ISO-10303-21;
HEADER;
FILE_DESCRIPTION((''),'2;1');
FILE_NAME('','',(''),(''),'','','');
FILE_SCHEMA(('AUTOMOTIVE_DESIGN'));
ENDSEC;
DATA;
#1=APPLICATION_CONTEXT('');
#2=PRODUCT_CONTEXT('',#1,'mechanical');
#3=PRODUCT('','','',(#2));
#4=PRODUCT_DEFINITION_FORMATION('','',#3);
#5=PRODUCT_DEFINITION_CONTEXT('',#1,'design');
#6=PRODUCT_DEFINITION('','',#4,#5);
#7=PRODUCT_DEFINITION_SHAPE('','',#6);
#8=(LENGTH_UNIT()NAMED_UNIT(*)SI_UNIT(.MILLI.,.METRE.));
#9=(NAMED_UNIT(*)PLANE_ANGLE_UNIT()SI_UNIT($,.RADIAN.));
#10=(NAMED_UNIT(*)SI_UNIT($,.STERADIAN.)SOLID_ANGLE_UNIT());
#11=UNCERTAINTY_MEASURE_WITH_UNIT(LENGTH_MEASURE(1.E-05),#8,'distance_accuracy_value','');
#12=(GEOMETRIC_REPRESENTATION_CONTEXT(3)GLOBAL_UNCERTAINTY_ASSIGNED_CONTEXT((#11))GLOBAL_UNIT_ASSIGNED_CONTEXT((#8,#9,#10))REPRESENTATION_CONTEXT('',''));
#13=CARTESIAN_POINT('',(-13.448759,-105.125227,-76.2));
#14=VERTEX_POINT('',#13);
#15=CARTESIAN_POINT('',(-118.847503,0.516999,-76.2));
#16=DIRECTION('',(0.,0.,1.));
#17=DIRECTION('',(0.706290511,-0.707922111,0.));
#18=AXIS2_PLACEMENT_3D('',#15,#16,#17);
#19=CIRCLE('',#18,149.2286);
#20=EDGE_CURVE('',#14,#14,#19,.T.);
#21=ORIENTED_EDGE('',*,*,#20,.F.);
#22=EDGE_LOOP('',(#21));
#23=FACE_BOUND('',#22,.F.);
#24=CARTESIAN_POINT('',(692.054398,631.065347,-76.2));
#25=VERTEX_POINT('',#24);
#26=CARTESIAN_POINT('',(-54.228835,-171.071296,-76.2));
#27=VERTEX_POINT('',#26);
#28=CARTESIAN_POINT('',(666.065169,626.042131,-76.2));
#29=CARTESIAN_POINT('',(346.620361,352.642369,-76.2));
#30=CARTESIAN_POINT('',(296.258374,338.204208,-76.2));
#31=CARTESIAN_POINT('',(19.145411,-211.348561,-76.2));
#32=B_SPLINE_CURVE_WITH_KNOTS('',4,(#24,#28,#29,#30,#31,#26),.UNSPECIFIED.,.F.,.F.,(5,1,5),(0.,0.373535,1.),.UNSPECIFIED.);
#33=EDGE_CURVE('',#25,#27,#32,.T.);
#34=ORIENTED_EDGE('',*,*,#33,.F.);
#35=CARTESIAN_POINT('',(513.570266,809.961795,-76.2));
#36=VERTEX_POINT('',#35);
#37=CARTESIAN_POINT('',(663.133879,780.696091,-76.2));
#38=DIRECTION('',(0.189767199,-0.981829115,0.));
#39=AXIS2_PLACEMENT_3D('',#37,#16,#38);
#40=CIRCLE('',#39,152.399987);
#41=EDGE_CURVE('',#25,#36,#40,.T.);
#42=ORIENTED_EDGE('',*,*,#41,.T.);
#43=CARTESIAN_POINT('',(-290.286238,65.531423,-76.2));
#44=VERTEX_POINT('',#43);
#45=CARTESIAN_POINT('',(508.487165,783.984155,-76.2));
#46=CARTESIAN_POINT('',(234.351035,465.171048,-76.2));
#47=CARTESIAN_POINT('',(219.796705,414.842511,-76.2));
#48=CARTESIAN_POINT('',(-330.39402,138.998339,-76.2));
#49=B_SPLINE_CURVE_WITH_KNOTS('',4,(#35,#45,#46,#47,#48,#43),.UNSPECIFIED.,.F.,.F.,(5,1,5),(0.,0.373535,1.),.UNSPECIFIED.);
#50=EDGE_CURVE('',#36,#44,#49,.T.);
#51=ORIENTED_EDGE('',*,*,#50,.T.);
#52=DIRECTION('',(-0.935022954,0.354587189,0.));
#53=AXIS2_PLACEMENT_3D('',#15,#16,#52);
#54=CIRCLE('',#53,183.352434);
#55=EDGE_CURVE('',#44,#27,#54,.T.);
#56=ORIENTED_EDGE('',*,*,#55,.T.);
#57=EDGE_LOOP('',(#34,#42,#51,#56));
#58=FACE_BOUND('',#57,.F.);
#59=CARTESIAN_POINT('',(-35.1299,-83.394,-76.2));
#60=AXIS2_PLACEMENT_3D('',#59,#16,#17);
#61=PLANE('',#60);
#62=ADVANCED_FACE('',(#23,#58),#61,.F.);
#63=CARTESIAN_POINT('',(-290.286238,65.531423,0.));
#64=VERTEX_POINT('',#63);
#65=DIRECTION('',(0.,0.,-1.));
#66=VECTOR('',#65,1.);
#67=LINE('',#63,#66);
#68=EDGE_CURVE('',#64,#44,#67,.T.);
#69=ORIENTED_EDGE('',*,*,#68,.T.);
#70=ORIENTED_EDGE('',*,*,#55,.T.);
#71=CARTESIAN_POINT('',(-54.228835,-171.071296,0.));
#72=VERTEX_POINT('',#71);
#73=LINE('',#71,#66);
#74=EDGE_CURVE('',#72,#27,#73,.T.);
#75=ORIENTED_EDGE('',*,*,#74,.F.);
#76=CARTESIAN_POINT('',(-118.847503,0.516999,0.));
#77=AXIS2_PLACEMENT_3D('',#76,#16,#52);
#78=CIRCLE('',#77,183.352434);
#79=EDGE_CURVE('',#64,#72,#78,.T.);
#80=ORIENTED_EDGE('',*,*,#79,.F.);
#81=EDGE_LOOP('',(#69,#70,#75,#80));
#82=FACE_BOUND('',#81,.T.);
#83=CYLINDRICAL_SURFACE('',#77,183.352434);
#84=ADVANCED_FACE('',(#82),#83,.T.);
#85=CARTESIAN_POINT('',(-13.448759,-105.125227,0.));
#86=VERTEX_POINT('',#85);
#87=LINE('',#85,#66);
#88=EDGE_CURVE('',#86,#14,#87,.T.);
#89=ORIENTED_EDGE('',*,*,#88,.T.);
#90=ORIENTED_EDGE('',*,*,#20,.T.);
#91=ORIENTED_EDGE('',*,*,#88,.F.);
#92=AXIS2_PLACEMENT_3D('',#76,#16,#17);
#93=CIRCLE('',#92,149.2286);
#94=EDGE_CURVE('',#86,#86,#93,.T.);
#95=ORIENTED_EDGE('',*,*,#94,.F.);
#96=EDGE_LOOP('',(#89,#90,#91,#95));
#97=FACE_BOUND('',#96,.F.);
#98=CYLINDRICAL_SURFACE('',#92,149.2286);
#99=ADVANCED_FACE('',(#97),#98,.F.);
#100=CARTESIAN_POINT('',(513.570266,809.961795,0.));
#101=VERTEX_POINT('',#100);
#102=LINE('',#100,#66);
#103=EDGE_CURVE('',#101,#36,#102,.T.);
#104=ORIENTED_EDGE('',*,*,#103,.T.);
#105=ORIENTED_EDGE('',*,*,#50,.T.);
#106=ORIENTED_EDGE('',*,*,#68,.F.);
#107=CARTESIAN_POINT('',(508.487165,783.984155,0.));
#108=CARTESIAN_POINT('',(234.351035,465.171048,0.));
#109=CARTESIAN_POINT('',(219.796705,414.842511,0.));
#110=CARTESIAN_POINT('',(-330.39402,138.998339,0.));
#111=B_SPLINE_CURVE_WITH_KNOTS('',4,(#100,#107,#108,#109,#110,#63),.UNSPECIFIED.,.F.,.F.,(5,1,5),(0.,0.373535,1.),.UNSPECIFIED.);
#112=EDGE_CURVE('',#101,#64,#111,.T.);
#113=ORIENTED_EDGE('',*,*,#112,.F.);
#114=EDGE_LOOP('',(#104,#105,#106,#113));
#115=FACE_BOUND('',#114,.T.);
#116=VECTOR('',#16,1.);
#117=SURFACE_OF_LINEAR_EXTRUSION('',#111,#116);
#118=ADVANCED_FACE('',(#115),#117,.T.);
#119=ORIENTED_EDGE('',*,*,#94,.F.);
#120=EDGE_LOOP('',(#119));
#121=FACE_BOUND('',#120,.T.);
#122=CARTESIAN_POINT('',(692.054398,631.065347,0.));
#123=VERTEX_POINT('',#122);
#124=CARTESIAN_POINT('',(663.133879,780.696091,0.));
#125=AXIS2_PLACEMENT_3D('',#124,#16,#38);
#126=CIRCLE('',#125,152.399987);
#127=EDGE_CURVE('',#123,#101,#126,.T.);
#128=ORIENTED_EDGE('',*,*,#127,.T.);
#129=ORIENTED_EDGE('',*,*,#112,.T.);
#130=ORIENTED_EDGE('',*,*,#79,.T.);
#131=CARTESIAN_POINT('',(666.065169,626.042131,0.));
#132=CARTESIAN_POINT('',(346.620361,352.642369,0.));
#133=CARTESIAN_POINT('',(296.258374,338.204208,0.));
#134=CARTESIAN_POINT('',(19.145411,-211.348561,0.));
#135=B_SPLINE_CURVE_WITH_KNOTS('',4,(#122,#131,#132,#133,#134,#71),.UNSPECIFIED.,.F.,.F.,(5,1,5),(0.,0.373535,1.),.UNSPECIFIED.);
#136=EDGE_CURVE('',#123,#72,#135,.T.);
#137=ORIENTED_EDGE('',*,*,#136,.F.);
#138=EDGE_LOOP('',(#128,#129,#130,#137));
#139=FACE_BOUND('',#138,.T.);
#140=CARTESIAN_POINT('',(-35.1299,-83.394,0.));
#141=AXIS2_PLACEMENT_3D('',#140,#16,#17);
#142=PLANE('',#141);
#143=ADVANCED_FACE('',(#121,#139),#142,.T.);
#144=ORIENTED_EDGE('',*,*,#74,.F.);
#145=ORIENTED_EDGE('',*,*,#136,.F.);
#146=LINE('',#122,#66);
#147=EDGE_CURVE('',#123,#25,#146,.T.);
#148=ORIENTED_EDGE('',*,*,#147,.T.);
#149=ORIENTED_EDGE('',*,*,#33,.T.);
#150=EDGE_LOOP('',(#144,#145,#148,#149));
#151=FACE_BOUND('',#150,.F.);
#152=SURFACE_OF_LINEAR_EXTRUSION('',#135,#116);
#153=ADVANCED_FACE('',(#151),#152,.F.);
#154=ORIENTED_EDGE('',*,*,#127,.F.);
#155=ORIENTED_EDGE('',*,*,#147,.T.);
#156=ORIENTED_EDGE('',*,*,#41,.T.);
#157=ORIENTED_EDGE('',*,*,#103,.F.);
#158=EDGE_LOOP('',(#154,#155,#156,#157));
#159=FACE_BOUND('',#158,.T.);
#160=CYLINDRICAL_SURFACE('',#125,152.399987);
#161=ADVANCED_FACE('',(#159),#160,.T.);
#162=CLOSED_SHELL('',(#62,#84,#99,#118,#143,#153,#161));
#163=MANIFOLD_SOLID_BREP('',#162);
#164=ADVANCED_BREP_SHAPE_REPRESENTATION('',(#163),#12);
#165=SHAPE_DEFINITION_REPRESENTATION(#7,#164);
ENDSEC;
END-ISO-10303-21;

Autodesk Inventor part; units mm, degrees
ref_plane "YZ Plane" through (0, 0, 0) normal (1, 0, 0) x (0, 1, 0)
ref_plane "XZ Plane" through (0, 0, 0) normal (0, 1, 0) x (-1, 0, 0)
ref_plane "XY Plane" through (0, 0, 0) normal (0, 0, 1) x (1, 0, 0)
ref_plane "Work Plane1" through (-35.1299, -83.394, 0) normal (0, 0, 1) x (0.7062905, -0.7079221, 0)
sketch "Sketch1" plane through (-35.1299, -83.394, 0) normal (0, 0, 1) x (0.7062905, -0.7079221, 0)
  circle A0 centre (-118.0078, -0.3279) radius 6.35 projected
  circle A1 centre (-118.5314, 0) radius 149.2286
  arc A2 (48.5793, -75.4462) -> (-285.6421, -75.4462) centre (-118.5314, 0) ccw
  line L0 (-118.5314, 0) -> (-118.5314, 1222.8979) construction
  arc A3 (-244.8846, 1019.4057) -> (7.8218, 1019.4057) centre (-118.5314, 1104.615) ccw
  spline S0 degree 4 poles (7.8218, 1019.4057) (-6.9781, 997.4595) (-39.0532, 578.2178) (-64.4023, 532.3679) (128.916, -51.9504) (48.5793, -75.4462) knots 0 0 0 0 0 0.373535 1 1 1 1 1
  line L1 (25.7608, 1046.0066) -> (-10.1171, 992.8047) construction
  arc A4 (19.6566, 1024.5678) -> (7.4714, 1006.4989) centre (17.8001, 1012.6766) ccw construction
  spline S1 degree 4 poles (-244.8846, 1019.4057) (-230.0846, 997.4595) (-198.0095, 578.2178) (-172.6604, 532.3679) (-365.9787, -51.9504) (-285.6421, -75.4462) knots 0 0 0 0 0 0.373535 1 1 1 1 1
  line L2 (-262.8235, 1046.0066) -> (-226.9456, 992.8047) construction
  arc A5 (-244.5341, 1006.4989) -> (-256.7193, 1024.5678) centre (-254.8628, 1012.6766) ccw construction
  arc A6 (-285.6421, -75.4462) -> (48.5793, -75.4462) centre (-118.5314, 0) ccw
  arc A7 (7.8218, 1019.4057) -> (-244.8846, 1019.4057) centre (-118.5314, 1104.615) ccw
  point P0 (-34.2245, 83.7696)
  point P1 (-21.2914, 810.23)
  point P2 (-21.2914, 520.0523)
  point P3 (59.9573, 110.7433)
  point P4 (-215.7713, 810.23)
  point P5 (-215.7713, 520.0523)
  point P6 (-297.02, 110.7433)
  dimension "d0" = 304.8
extrude "Extrusion1" add sketch "Sketch1" against normal blind 76.2 contours A6 A2 | A2 S1 A3 S0 | A3 A7
properties material "Wood (Cherry)"
